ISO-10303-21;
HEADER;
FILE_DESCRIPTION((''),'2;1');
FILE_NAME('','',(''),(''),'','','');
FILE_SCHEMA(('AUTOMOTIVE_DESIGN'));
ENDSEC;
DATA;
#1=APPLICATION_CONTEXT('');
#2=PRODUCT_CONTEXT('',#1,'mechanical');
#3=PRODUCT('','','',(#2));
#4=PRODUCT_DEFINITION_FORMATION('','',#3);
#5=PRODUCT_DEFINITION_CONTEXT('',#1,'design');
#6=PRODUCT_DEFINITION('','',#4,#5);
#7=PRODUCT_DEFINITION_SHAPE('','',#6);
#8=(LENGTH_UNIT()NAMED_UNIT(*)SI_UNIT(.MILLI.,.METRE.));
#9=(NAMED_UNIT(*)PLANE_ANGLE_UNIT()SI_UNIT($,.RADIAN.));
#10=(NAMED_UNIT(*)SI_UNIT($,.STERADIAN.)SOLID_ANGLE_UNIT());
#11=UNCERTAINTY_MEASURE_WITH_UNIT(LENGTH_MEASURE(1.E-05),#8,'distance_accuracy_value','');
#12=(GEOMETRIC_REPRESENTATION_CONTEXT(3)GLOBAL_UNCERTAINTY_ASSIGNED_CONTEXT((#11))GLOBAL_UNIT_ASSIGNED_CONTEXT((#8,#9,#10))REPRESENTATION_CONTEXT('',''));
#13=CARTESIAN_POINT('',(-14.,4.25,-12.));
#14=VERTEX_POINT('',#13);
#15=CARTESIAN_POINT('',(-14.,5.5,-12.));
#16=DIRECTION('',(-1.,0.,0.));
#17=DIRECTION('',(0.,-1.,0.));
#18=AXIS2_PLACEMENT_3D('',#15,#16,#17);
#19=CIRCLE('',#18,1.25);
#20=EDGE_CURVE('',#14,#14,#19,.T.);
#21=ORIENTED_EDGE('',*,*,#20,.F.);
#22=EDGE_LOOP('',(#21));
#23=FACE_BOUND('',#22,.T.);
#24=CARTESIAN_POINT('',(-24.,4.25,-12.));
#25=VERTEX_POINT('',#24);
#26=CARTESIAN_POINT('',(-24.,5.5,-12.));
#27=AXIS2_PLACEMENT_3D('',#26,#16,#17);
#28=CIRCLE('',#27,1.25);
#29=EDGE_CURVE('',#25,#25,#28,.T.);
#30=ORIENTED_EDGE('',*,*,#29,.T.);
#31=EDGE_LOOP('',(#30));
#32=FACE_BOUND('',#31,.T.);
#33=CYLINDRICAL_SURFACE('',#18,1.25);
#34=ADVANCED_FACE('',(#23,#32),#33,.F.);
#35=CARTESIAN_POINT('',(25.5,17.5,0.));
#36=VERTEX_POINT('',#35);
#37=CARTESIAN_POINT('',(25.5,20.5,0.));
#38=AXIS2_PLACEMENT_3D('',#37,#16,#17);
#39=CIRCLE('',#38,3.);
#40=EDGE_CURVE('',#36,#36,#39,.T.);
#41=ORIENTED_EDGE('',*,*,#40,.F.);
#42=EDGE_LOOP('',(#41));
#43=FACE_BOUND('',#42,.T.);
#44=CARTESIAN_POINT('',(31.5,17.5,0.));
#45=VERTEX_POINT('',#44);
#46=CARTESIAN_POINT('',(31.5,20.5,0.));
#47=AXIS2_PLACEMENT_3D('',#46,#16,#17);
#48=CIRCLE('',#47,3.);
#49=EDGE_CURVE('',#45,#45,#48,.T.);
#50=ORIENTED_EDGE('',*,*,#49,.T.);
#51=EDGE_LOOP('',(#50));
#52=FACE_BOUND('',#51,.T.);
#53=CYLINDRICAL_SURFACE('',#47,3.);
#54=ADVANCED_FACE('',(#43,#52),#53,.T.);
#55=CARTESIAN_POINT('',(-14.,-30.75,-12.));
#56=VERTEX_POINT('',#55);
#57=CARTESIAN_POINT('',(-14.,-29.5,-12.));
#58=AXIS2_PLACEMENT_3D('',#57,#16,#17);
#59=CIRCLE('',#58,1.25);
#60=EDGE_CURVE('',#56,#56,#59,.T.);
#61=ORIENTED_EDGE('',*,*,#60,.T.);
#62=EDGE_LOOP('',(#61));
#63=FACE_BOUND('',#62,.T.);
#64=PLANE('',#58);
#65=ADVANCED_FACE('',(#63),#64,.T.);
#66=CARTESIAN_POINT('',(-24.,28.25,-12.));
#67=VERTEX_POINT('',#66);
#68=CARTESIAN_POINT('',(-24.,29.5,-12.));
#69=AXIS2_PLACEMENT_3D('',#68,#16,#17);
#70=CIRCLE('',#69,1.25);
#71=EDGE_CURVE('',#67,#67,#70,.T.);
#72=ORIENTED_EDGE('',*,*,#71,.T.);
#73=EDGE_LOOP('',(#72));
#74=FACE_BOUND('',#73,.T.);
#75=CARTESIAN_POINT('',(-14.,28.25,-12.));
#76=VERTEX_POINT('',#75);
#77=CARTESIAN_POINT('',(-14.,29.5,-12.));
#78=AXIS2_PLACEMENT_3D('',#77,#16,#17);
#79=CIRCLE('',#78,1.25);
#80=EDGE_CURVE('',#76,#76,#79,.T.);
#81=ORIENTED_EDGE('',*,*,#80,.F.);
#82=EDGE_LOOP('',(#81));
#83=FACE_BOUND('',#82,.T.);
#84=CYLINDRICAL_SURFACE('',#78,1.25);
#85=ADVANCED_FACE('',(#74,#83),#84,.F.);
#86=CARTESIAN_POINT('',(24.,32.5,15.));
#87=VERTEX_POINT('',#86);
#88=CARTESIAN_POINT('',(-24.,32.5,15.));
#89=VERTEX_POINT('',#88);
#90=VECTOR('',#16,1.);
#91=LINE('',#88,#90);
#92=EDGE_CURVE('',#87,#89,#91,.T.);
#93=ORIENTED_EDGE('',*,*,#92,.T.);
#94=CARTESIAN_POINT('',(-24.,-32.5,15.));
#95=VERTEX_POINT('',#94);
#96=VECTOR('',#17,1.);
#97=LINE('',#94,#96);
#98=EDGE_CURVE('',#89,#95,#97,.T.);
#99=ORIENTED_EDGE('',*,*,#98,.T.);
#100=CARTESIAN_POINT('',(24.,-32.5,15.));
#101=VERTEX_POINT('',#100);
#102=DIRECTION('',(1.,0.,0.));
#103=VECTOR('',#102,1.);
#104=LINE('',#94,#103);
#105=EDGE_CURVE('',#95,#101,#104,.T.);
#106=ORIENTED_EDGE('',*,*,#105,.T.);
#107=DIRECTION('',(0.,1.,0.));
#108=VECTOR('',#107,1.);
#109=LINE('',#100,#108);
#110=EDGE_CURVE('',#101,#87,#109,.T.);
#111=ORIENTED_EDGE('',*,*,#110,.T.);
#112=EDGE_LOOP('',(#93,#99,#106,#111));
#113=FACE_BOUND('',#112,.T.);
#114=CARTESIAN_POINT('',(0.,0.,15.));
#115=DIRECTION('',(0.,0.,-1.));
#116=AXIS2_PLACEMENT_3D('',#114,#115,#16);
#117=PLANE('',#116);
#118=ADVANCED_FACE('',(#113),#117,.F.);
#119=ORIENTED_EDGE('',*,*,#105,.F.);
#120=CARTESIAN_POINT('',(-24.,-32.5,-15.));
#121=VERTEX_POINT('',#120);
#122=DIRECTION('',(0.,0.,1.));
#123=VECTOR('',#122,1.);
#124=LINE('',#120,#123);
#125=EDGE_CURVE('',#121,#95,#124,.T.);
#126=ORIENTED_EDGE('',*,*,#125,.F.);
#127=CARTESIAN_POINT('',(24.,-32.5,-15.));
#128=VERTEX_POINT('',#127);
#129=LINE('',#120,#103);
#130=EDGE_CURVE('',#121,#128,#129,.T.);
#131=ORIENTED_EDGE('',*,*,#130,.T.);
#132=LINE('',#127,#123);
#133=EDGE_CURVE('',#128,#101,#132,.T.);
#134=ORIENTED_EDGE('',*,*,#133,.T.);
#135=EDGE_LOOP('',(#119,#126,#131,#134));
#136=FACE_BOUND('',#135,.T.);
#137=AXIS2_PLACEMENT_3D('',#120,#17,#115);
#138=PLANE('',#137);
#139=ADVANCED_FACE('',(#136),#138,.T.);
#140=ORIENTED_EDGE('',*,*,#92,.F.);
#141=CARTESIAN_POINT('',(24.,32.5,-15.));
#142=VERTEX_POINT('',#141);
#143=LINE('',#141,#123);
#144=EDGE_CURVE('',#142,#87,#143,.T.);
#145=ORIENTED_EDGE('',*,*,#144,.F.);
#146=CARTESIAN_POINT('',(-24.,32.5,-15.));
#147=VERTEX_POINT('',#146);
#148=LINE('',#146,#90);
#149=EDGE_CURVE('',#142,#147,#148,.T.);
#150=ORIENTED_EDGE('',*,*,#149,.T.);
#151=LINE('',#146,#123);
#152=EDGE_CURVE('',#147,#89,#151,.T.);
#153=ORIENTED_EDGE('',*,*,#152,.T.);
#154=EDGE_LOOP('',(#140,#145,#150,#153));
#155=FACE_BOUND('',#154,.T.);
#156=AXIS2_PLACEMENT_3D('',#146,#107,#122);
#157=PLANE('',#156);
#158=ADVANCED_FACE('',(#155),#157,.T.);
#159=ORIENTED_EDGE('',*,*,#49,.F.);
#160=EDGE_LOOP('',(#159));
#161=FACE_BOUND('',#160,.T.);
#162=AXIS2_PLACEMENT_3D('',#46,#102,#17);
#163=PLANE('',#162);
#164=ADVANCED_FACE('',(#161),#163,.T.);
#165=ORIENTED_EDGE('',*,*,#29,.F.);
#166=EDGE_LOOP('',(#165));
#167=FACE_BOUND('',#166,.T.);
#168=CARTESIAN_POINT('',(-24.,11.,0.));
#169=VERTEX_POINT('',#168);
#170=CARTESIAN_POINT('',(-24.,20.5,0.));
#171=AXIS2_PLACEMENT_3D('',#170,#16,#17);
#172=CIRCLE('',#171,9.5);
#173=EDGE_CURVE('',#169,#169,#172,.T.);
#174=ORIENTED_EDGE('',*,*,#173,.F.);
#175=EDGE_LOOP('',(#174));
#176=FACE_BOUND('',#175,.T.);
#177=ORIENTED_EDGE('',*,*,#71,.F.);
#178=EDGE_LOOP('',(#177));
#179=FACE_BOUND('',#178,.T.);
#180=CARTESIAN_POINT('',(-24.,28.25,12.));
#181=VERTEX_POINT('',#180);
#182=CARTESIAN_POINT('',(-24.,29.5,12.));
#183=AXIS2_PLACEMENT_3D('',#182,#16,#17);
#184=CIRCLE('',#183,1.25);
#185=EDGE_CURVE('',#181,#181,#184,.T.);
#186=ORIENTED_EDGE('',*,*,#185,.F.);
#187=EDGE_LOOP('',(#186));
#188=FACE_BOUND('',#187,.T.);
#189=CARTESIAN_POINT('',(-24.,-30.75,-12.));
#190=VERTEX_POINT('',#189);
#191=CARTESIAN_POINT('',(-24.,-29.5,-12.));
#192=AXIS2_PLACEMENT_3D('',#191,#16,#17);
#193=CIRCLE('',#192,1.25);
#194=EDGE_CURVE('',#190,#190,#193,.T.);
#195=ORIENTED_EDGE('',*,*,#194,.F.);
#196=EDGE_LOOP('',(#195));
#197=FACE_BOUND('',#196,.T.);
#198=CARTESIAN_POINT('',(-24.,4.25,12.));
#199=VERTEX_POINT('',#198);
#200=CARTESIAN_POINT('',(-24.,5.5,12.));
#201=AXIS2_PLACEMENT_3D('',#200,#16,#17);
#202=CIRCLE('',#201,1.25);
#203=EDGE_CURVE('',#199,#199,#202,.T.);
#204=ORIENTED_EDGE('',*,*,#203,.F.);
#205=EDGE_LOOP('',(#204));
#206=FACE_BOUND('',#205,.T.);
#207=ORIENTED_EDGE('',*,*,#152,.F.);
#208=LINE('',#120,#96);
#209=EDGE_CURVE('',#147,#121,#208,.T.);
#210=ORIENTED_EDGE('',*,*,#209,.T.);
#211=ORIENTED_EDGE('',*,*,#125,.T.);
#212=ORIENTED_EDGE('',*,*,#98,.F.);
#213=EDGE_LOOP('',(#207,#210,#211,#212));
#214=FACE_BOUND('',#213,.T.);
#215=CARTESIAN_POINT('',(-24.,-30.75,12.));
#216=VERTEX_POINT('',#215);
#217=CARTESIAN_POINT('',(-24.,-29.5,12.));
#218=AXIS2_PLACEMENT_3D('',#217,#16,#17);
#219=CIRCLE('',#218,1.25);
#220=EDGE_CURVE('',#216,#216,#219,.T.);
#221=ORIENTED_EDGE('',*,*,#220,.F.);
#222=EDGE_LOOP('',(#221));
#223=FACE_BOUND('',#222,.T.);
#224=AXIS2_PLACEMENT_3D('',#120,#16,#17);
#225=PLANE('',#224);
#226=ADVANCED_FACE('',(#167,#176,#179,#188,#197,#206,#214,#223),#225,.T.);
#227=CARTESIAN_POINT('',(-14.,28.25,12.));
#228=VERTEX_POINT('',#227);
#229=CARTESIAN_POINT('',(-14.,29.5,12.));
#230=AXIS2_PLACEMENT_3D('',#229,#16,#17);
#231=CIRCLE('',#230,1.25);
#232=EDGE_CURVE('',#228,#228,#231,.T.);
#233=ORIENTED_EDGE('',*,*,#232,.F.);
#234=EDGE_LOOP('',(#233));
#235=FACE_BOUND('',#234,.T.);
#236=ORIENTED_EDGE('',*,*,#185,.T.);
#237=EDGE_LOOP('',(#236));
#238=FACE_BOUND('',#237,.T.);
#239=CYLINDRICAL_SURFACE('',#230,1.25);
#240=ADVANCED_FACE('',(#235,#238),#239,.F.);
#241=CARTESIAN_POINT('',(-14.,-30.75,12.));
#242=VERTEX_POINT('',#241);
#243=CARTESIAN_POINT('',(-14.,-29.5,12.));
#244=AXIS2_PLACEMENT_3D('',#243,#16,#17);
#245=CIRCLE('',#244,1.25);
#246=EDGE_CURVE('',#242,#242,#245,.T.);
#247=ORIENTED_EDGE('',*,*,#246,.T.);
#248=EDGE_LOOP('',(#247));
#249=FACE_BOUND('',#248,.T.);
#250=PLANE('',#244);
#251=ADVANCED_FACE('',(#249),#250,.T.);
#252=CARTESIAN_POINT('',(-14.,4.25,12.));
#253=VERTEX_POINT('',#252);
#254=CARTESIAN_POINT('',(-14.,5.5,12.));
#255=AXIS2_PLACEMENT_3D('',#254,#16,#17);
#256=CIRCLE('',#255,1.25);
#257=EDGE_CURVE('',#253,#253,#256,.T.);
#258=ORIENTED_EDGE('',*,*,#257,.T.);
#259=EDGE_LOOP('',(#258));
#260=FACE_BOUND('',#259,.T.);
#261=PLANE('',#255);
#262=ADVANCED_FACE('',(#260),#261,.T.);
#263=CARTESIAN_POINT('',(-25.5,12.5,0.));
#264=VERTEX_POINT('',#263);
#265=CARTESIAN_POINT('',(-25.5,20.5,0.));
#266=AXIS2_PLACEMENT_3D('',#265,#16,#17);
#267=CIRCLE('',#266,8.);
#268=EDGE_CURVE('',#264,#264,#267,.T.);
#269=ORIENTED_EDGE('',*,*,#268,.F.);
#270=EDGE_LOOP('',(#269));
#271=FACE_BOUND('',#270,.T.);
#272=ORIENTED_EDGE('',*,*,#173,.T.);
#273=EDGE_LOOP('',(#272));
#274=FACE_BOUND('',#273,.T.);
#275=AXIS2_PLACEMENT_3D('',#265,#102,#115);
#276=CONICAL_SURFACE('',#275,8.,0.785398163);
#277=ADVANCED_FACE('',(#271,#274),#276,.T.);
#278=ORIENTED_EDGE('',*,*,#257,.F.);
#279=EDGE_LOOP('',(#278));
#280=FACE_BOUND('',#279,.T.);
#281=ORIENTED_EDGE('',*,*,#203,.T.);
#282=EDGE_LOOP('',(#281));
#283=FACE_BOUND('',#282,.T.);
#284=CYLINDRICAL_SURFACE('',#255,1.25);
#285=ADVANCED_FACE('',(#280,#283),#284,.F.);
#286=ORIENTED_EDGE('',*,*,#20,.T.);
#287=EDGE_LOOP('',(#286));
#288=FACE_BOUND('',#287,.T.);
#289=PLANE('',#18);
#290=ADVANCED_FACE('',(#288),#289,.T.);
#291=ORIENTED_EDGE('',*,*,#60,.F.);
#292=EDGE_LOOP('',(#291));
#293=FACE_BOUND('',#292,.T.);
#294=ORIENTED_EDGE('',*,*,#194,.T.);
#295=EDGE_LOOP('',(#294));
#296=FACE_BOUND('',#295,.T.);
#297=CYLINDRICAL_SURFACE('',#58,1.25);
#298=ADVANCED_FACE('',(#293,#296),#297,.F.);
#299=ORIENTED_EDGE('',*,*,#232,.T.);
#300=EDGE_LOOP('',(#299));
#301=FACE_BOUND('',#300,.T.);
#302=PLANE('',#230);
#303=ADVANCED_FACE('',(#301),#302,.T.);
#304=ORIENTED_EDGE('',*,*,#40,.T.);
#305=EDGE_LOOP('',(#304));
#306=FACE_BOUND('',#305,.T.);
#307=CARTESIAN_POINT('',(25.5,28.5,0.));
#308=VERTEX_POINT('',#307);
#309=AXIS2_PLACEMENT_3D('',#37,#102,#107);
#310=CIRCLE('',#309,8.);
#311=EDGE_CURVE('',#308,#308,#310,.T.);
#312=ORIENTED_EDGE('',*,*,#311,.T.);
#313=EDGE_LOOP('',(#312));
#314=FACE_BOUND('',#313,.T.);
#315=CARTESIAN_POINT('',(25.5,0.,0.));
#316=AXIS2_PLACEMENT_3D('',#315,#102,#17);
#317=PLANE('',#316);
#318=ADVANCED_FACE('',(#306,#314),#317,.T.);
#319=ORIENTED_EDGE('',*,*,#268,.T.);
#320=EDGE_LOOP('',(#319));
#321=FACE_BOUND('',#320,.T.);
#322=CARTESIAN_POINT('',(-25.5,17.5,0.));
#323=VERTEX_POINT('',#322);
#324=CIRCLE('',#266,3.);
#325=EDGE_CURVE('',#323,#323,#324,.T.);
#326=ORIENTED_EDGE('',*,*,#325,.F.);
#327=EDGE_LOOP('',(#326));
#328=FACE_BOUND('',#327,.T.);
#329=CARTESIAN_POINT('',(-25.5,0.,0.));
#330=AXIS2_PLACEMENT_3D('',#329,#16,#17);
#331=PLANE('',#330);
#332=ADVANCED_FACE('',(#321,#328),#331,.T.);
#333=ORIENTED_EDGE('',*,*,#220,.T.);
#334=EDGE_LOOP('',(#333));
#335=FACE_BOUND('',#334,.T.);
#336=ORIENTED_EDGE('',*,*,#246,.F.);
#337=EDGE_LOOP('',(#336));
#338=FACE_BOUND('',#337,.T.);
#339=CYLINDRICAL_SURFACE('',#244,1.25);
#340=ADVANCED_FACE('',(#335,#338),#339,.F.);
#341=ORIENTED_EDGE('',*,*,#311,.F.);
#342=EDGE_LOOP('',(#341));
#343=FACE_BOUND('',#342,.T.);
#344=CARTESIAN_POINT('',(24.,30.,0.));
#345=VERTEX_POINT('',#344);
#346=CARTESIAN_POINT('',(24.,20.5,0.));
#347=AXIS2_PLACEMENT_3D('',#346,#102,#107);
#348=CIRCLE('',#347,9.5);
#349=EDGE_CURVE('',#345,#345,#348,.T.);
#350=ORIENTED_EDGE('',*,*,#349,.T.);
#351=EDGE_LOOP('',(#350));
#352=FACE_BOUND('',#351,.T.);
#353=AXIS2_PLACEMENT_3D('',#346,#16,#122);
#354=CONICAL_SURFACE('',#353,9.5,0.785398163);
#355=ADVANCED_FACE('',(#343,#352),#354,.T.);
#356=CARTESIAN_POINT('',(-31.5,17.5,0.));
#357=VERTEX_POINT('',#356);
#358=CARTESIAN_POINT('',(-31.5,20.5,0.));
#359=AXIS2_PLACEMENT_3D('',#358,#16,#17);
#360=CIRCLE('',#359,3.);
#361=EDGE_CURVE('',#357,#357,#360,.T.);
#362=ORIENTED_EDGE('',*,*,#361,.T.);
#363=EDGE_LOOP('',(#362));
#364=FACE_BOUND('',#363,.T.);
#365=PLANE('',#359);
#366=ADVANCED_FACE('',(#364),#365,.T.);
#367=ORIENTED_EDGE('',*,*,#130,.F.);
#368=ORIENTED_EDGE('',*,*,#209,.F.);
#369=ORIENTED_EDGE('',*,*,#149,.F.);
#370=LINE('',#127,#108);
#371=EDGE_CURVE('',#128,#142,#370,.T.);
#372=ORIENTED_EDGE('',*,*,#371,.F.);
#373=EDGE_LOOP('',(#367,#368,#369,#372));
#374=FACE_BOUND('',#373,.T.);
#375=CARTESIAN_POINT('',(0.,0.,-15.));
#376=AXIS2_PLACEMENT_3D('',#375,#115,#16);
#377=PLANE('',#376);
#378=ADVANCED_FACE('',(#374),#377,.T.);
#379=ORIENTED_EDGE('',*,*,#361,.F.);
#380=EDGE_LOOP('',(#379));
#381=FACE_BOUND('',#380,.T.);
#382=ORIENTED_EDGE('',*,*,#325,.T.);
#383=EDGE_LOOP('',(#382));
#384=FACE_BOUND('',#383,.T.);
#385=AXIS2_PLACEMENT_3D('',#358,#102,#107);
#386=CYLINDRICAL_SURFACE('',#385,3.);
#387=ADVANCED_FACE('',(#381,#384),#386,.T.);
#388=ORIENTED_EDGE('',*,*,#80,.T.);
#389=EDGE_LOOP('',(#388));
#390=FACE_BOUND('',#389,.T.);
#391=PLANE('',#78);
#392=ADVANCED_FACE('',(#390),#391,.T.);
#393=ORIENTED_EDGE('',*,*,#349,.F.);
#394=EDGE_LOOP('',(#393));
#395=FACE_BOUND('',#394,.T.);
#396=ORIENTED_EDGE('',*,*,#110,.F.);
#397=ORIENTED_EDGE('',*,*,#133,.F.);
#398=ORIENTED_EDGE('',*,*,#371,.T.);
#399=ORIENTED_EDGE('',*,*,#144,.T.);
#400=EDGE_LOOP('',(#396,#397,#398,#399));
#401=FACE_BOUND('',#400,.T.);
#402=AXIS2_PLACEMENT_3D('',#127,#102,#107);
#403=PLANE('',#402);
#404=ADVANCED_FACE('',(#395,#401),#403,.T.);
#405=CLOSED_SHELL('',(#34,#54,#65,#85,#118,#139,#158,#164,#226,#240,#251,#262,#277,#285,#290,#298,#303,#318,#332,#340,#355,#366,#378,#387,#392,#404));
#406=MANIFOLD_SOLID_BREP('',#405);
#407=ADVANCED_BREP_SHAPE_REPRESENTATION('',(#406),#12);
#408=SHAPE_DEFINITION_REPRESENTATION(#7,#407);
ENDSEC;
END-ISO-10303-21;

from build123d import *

# Parameters (mm, degrees)
BOSS_EXTRUDE1_DEPTH      = 15
BOSS_EXTRUDE1_DEPTH_BACK = 15
SKETCH1_W                = 48
SKETCH1_H                = 65
SKETCH2_R                = 1.25
CUT_EXTRUDE1_DEPTH       = 10
SKETCH4_R                = 9.5
SKETCH4_R_2              = 8
SKETCH4_R_3              = 3
BOSS_EXTRUDE3_DEPTH      = 1.5
CHAMFER2_SIZE            = 1.5
SKETCH5_R                = 3
BOSS_EXTRUDE4_DEPTH      = 6
CHAMFER2_OF_MIRROR1_SIZE = 1.5


with BuildPart() as part:
    # Sketch1 → Boss-Extrude1 (new, two sides: drawn at the far end of the back side and taken through both)
    with BuildSketch(Plane.XY.offset(-BOSS_EXTRUDE1_DEPTH_BACK)):
        Rectangle(SKETCH1_W, SKETCH1_H)
    extrude(amount=BOSS_EXTRUDE1_DEPTH + BOSS_EXTRUDE1_DEPTH_BACK)

    # Sketch2 → Cut-Extrude1 (cut)
    with BuildSketch(Plane.ZY.offset(24)):
        with Locations(Location((-12, 29.5, 0), (0, 0, 270))):
            Circle(SKETCH2_R)
        with Locations(Location((12, 29.5, 0), (0, 0, 270))):
            Circle(SKETCH2_R)
        with Locations(Location((12, 5.5, 0), (0, 0, 270))):
            Circle(SKETCH2_R)
        with Locations(Location((-12, 5.5, 0), (0, 0, 270))):
            Circle(SKETCH2_R)
        with Locations(Location((-12, -29.5, 0), (0, 0, 270))):
            Circle(SKETCH2_R)
        with Locations(Location((12, -29.5, 0), (0, 0, 270))):
            Circle(SKETCH2_R)
    extrude(amount=-CUT_EXTRUDE1_DEPTH, mode=Mode.SUBTRACT)

    # Sketch4 → Boss-Extrude3 (add)
    # profile 1 of 3: a face of its own
    with BuildSketch(Plane.ZY.offset(24)):
        with Locations(Location((0, 20.5, 0), (0, 0, 270))):
            Circle(SKETCH4_R)
        with Locations((0, 20.5)):
            Circle(SKETCH4_R_2, mode=Mode.SUBTRACT)
    # profile 2 of 3: a face of its own
    with BuildSketch(Plane.ZY.offset(24)):
        with Locations((0, 20.5)):
            Circle(SKETCH4_R_2)
        with Locations((0, 20.5)):
            Circle(SKETCH4_R_3, mode=Mode.SUBTRACT)
    # profile 3 of 3: a face of its own
    with BuildSketch(Plane.ZY.offset(24)):
        with Locations((0, 20.5)):
            Circle(SKETCH4_R_3)
    boss_extrude3 = extrude(amount=BOSS_EXTRUDE3_DEPTH)

    # Chamfer2
    chamfer2_edges = [part.edges().sort_by_distance(p)[0] for p in [
        (-25.5, 30, 0),
    ]]
    chamfer(chamfer2_edges, length=CHAMFER2_SIZE - 0.0001)  # a hair under: the kernel refuses the full size

    # Sketch5 → Boss-Extrude4 (add)
    with BuildSketch(Plane.ZY.offset(25.5)):
        with Locations(Location((0, 20.5, 0), (0, 0, 270))):
            Circle(SKETCH5_R)
    boss_extrude4 = extrude(amount=BOSS_EXTRUDE4_DEPTH)

    # Mirror1: Boss-Extrude3, Boss-Extrude4 across plane
    add(boss_extrude3.mirror(Plane(origin=(0, 0, 0), x_dir=(0, 0, 1), z_dir=(1, 0, 0))))
    add(boss_extrude4.mirror(Plane(origin=(0, 0, 0), x_dir=(0, 0, 1), z_dir=(1, 0, 0))))

    # Chamfer2 of Mirror1
    chamfer2_of_mirror1_edges = [part.edges().sort_by_distance(p)[0] for p in [
        (25.5, 30, 0),
    ]]
    chamfer(chamfer2_of_mirror1_edges, length=CHAMFER2_OF_MIRROR1_SIZE - 0.0001)  # a hair under: the kernel refuses the full size


solid = part.part
